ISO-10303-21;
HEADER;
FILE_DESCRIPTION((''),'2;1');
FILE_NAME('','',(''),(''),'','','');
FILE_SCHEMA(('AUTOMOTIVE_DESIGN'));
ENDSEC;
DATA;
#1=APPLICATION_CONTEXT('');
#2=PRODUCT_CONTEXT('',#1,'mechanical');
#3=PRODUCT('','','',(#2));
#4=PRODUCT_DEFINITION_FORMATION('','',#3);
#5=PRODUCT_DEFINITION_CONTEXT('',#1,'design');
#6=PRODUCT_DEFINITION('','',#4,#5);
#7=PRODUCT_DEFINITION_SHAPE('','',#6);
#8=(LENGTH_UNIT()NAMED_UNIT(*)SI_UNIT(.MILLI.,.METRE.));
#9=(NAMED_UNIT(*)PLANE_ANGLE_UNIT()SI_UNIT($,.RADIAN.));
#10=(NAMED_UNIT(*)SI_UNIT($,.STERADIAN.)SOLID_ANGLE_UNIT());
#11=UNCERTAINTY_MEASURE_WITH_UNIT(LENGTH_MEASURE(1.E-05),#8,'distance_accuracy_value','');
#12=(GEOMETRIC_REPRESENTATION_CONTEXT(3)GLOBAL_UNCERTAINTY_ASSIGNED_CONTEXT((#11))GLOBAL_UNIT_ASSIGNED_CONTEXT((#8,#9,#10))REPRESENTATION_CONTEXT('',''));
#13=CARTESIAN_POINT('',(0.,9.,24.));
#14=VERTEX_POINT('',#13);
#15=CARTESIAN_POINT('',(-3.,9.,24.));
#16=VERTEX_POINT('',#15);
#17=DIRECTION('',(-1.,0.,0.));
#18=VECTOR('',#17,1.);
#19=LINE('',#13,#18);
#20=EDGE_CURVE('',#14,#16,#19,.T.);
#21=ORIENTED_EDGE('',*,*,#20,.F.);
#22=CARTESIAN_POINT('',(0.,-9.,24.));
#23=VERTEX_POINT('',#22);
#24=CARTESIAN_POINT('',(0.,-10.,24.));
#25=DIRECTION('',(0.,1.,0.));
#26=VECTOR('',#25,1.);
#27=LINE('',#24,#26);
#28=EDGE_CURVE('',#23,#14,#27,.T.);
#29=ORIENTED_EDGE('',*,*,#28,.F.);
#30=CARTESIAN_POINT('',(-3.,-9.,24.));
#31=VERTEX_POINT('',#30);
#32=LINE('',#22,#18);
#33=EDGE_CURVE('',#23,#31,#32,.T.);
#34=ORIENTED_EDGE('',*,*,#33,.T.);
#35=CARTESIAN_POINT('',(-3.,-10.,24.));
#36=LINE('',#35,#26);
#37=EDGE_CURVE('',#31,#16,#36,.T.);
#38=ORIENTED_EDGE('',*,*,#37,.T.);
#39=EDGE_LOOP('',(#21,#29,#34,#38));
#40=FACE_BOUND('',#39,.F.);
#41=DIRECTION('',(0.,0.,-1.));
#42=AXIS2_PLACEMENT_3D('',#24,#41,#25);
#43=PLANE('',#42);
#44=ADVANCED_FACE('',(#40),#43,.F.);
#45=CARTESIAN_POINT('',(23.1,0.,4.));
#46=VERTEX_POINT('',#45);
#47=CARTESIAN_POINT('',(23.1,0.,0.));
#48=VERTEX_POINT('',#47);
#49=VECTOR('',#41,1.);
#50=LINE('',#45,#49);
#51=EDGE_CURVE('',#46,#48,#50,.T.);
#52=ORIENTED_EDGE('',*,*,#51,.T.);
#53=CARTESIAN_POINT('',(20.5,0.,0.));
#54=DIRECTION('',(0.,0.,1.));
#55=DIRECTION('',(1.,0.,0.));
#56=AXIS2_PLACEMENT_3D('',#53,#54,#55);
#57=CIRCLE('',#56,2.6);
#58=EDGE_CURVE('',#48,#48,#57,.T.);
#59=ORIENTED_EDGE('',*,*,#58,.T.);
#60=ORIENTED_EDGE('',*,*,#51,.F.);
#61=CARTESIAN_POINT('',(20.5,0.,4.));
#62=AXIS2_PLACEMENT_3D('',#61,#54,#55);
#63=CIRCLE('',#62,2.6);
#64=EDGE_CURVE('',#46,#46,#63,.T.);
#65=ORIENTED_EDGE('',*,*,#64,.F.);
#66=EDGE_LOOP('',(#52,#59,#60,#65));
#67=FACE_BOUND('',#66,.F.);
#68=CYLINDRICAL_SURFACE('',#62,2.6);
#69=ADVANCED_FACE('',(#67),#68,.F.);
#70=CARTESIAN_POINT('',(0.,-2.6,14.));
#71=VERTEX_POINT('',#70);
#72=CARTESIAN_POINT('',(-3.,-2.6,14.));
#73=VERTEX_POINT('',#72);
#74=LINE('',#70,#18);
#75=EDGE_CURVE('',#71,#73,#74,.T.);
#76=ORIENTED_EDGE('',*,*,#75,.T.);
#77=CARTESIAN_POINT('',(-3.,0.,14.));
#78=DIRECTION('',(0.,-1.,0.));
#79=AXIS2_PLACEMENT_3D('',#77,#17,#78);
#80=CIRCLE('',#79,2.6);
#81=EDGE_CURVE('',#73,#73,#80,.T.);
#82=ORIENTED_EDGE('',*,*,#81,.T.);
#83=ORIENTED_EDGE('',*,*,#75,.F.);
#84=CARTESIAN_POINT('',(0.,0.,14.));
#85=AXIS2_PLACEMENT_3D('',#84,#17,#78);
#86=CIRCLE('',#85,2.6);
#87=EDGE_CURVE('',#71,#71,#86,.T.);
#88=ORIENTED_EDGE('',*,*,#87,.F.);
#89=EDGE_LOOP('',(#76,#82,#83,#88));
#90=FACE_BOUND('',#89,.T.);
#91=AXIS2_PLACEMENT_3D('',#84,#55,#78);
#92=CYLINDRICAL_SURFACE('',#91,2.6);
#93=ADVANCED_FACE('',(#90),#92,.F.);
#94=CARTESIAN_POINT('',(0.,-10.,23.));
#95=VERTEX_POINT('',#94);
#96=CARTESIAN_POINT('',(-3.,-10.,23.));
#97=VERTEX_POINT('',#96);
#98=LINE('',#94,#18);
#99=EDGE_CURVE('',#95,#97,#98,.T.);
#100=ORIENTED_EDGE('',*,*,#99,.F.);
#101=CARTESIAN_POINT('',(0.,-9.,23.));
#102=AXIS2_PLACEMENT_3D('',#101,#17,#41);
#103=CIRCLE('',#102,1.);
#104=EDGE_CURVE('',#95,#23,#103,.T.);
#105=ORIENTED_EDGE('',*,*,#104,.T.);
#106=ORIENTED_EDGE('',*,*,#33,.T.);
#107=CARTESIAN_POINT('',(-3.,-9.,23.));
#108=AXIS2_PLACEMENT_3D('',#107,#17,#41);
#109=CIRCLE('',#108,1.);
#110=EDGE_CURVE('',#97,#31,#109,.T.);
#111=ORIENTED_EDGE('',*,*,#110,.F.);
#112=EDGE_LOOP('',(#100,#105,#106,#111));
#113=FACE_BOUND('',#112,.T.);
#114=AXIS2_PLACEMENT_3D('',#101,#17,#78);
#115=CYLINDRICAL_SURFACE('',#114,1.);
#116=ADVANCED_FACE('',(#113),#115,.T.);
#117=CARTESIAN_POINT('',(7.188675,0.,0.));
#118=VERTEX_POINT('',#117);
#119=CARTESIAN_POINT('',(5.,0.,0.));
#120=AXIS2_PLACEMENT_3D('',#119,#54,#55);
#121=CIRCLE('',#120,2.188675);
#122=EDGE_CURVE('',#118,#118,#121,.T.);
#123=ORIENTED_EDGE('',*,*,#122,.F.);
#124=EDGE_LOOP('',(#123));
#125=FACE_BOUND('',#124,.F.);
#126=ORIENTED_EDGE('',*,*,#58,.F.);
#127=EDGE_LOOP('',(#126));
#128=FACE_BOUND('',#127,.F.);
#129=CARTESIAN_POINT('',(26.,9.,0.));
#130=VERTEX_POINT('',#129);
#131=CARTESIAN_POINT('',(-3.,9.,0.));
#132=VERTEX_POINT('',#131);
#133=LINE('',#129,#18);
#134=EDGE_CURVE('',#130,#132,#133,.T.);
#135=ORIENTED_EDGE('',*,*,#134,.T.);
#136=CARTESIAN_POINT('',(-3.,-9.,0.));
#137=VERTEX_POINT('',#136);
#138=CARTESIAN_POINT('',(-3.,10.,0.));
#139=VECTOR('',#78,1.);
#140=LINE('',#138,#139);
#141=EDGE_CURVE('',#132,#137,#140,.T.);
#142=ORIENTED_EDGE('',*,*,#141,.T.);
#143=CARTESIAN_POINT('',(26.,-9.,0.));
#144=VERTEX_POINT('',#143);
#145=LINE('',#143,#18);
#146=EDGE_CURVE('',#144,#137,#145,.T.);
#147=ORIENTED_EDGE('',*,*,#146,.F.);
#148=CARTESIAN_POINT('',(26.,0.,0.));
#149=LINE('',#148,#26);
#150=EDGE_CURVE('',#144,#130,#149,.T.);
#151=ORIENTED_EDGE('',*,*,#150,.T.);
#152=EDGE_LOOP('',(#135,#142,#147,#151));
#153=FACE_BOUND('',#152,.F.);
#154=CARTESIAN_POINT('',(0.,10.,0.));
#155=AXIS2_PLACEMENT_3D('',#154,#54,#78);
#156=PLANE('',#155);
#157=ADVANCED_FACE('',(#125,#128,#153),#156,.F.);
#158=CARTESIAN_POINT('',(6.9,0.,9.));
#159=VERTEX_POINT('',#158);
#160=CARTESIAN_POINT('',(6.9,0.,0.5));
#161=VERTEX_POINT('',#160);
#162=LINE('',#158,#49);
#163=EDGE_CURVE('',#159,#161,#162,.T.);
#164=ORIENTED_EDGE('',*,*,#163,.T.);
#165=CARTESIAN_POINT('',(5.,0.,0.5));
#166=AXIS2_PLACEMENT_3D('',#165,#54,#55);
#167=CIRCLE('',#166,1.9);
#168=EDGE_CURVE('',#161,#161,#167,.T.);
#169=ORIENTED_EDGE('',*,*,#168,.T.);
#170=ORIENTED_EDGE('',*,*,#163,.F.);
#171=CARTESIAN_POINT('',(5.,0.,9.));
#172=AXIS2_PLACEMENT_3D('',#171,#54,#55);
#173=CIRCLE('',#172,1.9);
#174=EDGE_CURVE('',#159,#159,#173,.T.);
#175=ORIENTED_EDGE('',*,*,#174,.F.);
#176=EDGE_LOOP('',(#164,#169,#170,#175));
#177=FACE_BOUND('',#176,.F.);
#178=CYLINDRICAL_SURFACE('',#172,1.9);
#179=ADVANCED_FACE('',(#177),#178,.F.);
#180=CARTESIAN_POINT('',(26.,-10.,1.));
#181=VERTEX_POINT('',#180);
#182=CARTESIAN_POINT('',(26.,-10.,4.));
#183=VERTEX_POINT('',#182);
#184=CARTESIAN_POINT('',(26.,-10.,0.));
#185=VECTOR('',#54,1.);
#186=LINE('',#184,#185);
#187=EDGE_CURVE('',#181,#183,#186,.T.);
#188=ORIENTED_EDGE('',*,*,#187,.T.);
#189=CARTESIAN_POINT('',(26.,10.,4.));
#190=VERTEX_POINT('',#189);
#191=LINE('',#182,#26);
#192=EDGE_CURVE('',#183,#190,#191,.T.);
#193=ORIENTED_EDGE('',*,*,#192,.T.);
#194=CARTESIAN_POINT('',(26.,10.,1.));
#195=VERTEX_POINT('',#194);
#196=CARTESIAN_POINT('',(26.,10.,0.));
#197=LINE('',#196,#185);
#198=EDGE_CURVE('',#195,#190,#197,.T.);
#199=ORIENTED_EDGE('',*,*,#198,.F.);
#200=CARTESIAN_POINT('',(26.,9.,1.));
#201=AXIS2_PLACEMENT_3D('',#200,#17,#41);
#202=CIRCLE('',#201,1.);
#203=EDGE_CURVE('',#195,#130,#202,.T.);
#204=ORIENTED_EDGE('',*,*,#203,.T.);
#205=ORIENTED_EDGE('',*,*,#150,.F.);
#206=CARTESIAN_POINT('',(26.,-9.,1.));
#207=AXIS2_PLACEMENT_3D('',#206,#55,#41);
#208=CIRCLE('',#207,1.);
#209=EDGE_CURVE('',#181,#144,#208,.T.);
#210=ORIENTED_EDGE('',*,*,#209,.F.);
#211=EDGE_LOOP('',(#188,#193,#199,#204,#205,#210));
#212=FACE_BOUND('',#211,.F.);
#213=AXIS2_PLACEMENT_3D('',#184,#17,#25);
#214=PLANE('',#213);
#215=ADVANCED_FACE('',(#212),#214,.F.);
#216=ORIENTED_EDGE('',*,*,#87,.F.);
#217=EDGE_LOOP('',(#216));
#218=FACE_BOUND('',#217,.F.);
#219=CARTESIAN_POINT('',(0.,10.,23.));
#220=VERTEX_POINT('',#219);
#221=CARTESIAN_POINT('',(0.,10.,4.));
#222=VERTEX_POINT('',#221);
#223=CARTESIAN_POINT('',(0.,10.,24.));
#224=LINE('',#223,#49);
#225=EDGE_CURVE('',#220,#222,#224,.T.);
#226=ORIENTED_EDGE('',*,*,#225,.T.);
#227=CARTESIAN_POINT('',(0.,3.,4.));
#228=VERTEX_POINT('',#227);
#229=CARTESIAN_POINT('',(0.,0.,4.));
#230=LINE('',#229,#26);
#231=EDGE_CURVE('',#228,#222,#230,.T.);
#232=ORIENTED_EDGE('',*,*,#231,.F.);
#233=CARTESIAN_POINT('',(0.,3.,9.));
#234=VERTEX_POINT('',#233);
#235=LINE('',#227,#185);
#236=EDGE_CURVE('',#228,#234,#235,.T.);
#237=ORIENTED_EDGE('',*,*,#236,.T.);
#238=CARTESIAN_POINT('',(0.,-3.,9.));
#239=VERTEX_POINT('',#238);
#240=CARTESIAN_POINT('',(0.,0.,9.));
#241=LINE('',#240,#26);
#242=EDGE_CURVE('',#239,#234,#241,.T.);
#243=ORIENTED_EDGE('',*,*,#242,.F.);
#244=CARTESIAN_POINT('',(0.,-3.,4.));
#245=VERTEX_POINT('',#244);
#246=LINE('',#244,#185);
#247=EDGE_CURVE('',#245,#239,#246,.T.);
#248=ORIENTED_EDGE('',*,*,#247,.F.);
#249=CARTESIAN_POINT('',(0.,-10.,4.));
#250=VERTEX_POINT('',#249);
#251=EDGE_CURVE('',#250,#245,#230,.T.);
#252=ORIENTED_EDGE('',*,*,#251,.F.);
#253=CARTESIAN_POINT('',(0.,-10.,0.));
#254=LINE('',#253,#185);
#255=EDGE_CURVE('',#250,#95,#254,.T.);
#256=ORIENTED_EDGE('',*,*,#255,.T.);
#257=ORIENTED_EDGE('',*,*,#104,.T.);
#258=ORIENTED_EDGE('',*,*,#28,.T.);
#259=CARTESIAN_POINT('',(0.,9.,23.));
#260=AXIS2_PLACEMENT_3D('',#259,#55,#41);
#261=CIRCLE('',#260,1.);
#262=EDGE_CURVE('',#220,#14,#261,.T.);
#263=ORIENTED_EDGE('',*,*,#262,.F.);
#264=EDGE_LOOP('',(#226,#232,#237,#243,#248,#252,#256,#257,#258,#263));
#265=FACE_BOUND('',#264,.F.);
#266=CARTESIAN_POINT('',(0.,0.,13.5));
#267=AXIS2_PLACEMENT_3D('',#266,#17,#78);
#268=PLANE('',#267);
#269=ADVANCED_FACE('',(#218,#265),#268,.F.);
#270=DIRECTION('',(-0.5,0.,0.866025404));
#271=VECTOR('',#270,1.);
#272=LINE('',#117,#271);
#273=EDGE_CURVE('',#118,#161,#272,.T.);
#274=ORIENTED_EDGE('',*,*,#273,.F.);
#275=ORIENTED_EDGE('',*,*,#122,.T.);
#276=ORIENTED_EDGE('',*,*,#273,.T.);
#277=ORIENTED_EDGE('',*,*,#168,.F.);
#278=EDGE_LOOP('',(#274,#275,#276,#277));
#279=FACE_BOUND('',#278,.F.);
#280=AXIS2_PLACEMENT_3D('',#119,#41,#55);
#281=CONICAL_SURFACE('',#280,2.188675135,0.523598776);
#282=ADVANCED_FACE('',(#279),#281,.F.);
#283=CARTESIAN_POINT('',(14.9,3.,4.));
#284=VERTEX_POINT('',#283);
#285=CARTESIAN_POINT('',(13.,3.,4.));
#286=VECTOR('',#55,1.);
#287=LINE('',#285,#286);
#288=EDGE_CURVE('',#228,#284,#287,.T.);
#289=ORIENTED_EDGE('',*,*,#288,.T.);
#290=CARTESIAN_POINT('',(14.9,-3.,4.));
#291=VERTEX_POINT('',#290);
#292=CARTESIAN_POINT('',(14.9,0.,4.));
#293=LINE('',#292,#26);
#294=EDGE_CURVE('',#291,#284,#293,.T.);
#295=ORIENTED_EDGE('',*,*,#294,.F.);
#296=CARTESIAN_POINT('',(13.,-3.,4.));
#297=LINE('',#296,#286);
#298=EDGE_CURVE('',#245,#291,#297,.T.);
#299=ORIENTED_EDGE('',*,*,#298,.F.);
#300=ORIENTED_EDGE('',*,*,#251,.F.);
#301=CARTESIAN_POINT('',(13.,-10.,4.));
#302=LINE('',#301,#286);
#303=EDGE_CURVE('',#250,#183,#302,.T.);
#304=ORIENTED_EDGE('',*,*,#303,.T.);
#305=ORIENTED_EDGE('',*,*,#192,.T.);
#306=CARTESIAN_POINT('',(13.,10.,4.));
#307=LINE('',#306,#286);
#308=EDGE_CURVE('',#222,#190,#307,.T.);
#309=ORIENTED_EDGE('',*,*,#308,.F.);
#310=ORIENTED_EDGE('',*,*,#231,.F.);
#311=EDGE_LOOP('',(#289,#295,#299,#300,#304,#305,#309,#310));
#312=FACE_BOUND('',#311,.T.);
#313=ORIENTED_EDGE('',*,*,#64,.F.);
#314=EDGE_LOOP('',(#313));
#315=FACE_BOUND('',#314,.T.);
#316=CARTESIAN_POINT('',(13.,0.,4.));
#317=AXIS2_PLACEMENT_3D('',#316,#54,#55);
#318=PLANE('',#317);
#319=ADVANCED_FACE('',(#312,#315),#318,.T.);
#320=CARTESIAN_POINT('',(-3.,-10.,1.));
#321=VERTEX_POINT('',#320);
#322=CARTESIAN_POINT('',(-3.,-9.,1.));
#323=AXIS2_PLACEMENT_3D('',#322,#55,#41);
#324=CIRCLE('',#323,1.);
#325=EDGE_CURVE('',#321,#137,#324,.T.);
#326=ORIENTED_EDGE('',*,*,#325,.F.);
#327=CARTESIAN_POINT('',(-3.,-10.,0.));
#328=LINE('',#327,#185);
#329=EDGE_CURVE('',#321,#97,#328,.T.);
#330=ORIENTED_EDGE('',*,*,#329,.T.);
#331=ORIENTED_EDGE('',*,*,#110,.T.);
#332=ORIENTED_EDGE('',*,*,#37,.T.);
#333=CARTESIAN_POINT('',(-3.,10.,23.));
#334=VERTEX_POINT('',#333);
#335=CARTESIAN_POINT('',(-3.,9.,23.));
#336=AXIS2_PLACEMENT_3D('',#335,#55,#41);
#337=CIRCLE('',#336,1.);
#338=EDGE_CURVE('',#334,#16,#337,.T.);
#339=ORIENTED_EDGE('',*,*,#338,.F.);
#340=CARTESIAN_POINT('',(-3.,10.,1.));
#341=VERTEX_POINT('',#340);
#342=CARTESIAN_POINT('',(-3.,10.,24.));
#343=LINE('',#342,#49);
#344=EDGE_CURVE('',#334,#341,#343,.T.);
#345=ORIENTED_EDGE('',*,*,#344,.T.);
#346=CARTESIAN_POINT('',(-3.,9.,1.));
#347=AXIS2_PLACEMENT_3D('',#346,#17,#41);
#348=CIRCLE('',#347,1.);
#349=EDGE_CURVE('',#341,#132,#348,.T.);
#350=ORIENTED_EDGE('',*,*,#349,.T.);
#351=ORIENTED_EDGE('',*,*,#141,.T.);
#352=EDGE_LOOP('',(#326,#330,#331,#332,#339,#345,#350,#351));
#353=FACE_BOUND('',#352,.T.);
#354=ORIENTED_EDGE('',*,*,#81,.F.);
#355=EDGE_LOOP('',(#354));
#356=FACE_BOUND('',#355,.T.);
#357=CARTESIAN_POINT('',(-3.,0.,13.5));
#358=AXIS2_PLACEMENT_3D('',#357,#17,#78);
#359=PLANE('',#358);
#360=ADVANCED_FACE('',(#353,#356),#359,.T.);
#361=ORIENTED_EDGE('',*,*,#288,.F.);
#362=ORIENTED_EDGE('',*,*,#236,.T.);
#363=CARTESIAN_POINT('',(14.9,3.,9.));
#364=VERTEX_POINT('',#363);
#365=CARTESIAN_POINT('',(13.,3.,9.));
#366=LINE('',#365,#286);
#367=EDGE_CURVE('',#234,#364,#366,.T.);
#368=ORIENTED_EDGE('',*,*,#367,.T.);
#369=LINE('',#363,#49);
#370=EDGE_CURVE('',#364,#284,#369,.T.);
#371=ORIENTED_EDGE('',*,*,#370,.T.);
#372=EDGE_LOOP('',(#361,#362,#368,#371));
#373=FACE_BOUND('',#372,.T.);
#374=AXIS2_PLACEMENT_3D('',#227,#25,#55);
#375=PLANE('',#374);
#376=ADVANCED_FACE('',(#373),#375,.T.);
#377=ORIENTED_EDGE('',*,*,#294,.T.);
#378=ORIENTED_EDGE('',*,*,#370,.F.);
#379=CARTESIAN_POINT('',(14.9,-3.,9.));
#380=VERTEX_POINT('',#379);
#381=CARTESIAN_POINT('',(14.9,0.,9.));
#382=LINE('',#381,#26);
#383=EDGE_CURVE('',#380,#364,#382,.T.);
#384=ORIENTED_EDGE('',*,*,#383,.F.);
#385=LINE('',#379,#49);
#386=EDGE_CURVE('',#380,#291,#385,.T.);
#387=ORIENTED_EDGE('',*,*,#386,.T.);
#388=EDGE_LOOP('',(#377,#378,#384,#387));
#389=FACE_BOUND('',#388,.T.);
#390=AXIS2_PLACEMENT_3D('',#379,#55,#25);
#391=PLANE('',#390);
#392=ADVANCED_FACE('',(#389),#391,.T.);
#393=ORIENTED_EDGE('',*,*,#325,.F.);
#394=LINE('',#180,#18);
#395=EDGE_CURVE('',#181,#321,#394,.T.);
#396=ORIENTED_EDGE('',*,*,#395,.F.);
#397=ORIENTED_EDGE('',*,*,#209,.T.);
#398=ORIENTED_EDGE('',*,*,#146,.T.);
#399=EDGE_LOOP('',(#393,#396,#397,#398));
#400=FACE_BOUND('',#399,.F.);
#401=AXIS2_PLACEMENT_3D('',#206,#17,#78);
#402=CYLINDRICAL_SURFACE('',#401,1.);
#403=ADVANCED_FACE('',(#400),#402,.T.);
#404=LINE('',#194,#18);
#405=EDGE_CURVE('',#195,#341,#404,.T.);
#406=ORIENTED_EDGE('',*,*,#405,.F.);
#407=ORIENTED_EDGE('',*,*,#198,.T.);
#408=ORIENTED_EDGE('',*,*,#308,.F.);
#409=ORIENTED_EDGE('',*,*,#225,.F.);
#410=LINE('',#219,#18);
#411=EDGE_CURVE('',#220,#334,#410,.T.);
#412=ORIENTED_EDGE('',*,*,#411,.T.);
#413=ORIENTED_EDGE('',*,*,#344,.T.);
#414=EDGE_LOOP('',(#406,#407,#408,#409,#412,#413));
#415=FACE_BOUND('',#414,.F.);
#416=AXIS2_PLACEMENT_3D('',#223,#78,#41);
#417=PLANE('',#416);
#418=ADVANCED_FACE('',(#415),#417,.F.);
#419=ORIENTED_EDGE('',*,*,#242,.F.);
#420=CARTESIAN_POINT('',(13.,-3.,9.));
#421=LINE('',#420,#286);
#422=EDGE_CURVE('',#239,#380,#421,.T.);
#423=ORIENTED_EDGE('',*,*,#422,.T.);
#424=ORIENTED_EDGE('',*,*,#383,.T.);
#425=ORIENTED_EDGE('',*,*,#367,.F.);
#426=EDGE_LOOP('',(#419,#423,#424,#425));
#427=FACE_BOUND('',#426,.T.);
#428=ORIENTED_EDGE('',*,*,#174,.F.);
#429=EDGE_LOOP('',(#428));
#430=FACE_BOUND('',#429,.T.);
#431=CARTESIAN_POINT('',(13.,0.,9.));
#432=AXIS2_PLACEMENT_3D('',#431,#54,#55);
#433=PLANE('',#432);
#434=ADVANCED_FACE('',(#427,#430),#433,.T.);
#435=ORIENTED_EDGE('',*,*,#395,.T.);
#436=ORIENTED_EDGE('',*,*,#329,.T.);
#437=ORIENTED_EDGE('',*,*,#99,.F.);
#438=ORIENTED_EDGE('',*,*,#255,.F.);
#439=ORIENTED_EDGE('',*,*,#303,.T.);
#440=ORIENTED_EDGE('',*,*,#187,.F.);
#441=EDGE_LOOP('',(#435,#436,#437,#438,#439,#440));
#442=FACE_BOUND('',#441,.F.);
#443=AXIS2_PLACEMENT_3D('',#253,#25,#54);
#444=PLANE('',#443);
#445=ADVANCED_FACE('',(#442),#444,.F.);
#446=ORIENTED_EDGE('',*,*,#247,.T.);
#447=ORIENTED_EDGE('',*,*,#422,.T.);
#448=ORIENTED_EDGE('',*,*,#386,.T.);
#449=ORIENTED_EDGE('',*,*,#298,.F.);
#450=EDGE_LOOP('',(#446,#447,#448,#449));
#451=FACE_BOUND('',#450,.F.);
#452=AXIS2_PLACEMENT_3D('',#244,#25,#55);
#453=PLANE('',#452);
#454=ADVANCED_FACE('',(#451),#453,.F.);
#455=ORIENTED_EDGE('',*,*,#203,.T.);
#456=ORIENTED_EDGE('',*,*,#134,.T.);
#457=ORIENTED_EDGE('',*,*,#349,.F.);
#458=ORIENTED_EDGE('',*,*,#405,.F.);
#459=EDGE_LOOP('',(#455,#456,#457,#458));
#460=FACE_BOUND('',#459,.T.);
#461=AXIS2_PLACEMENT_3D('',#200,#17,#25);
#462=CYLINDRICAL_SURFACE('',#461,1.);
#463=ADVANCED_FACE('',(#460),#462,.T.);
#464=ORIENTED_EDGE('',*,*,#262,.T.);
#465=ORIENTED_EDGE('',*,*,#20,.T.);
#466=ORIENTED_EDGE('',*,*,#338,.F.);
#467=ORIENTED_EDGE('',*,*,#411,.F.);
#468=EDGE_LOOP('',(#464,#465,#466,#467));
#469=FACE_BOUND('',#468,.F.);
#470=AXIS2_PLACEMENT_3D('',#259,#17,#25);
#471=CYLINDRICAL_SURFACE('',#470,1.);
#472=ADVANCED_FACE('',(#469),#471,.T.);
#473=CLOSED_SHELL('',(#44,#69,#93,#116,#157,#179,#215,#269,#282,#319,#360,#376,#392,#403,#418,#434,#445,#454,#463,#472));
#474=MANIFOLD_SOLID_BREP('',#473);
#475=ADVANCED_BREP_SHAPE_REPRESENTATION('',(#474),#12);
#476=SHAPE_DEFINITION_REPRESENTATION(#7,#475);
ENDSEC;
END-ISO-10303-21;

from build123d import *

# Parameters (mm, degrees)
F0_W      = 26
F0_H      = 20
F1_DEPTH  = 4
F2_W      = 26
F2_H      = 6
F3_DEPTH  = 5
F4_R      = 1.9
F5_DEPTH  = 25
F6_W      = 11.2
F6_H      = 6
F7_DEPTH  = 5
F8_R      = 2.6
F9_DEPTH  = 4
F10_R     = 2.6
F11_DEPTH = 3
F12_R     = 1


# Not quite as in the source:
# - a fillet or chamfer that OpenCascade refuses, or shapes differently, is made with other operations: its cross-section is extruded or revolved along the edge and cut away or added
# - a feature names something its author has since deleted; it is built from what else it names


with BuildPart() as f1:
    # F0 (on Top) → F1 (new body)
    with BuildSketch(Plane.XY):
        with Locations((13, 0)):
            Rectangle(F0_W, F0_H)
    extrude(amount=F1_DEPTH)

    # F2 (on face) → F3 (join)
    with BuildSketch(Plane.XY.offset(4)):
        with Locations((13, 0)):
            Rectangle(F2_W, F2_H)
    extrude(amount=F3_DEPTH)

    # F4 (on face) → F5 (cut)
    with BuildSketch(Plane.XY.offset(9)):
        with Locations((5, 0)):
            Circle(F4_R)
    extrude(amount=-F5_DEPTH, mode=Mode.SUBTRACT)

    # F6 (on face) → F7 (cut, through all)
    with BuildSketch(Plane.XY.offset(9)):
        with Locations((20.5, 0)):
            Rectangle(F6_W, F6_H)
    extrude(amount=-F7_DEPTH, mode=Mode.SUBTRACT)

    # F8 (on face) → F9 (cut, through all)
    with BuildSketch(Plane.XY.offset(4)):
        with Locations((20.5, 0)):
            Circle(F8_R)
    extrude(amount=-F9_DEPTH, mode=Mode.SUBTRACT)

    # F10 (on face) → F11 (join)
    with BuildSketch(Plane(origin=(0, 0, 0), x_dir=(0, -1, 0), z_dir=(-1, 0, 0))):
        Polygon((-10, 24), (-10, 4), (-3, 4), (-3, 9), (3, 9), (3, 4), (10, 4), (10, 24), align=None)
        with Locations((0, 14)):
            Circle(F10_R, mode=Mode.SUBTRACT)
        Polygon((-10, 4), (-10, 0), (10, 0), (10, 4), (3, 4), (3, 9), (-3, 9), (-3, 4), align=None)
    extrude(amount=F11_DEPTH)

    # F12
    f12_edges = [f1.edges().sort_by_distance(p)[0] for p in [
        (-1.5, -10, 24),
        (-1.5, 10, 24),
        (11.5, -10, 0),
        (11.5, 10, 0),
    ]]
    fillet(f12_edges, radius=F12_R)

    # F13: chamfer of 0.5 x 0.2886751346 on 1 edges, made by hand

    # F13_s1 → F13_t2 (revolve, cut)
    with BuildSketch(Plane.XZ):
        Polygon((7.1886751346, 0), (6.9, 0.5), (6.9, 0), align=None)
    revolve(axis=Axis((5, 0, 0), (0, 0, 1)), mode=Mode.SUBTRACT)


solid = f1.part
